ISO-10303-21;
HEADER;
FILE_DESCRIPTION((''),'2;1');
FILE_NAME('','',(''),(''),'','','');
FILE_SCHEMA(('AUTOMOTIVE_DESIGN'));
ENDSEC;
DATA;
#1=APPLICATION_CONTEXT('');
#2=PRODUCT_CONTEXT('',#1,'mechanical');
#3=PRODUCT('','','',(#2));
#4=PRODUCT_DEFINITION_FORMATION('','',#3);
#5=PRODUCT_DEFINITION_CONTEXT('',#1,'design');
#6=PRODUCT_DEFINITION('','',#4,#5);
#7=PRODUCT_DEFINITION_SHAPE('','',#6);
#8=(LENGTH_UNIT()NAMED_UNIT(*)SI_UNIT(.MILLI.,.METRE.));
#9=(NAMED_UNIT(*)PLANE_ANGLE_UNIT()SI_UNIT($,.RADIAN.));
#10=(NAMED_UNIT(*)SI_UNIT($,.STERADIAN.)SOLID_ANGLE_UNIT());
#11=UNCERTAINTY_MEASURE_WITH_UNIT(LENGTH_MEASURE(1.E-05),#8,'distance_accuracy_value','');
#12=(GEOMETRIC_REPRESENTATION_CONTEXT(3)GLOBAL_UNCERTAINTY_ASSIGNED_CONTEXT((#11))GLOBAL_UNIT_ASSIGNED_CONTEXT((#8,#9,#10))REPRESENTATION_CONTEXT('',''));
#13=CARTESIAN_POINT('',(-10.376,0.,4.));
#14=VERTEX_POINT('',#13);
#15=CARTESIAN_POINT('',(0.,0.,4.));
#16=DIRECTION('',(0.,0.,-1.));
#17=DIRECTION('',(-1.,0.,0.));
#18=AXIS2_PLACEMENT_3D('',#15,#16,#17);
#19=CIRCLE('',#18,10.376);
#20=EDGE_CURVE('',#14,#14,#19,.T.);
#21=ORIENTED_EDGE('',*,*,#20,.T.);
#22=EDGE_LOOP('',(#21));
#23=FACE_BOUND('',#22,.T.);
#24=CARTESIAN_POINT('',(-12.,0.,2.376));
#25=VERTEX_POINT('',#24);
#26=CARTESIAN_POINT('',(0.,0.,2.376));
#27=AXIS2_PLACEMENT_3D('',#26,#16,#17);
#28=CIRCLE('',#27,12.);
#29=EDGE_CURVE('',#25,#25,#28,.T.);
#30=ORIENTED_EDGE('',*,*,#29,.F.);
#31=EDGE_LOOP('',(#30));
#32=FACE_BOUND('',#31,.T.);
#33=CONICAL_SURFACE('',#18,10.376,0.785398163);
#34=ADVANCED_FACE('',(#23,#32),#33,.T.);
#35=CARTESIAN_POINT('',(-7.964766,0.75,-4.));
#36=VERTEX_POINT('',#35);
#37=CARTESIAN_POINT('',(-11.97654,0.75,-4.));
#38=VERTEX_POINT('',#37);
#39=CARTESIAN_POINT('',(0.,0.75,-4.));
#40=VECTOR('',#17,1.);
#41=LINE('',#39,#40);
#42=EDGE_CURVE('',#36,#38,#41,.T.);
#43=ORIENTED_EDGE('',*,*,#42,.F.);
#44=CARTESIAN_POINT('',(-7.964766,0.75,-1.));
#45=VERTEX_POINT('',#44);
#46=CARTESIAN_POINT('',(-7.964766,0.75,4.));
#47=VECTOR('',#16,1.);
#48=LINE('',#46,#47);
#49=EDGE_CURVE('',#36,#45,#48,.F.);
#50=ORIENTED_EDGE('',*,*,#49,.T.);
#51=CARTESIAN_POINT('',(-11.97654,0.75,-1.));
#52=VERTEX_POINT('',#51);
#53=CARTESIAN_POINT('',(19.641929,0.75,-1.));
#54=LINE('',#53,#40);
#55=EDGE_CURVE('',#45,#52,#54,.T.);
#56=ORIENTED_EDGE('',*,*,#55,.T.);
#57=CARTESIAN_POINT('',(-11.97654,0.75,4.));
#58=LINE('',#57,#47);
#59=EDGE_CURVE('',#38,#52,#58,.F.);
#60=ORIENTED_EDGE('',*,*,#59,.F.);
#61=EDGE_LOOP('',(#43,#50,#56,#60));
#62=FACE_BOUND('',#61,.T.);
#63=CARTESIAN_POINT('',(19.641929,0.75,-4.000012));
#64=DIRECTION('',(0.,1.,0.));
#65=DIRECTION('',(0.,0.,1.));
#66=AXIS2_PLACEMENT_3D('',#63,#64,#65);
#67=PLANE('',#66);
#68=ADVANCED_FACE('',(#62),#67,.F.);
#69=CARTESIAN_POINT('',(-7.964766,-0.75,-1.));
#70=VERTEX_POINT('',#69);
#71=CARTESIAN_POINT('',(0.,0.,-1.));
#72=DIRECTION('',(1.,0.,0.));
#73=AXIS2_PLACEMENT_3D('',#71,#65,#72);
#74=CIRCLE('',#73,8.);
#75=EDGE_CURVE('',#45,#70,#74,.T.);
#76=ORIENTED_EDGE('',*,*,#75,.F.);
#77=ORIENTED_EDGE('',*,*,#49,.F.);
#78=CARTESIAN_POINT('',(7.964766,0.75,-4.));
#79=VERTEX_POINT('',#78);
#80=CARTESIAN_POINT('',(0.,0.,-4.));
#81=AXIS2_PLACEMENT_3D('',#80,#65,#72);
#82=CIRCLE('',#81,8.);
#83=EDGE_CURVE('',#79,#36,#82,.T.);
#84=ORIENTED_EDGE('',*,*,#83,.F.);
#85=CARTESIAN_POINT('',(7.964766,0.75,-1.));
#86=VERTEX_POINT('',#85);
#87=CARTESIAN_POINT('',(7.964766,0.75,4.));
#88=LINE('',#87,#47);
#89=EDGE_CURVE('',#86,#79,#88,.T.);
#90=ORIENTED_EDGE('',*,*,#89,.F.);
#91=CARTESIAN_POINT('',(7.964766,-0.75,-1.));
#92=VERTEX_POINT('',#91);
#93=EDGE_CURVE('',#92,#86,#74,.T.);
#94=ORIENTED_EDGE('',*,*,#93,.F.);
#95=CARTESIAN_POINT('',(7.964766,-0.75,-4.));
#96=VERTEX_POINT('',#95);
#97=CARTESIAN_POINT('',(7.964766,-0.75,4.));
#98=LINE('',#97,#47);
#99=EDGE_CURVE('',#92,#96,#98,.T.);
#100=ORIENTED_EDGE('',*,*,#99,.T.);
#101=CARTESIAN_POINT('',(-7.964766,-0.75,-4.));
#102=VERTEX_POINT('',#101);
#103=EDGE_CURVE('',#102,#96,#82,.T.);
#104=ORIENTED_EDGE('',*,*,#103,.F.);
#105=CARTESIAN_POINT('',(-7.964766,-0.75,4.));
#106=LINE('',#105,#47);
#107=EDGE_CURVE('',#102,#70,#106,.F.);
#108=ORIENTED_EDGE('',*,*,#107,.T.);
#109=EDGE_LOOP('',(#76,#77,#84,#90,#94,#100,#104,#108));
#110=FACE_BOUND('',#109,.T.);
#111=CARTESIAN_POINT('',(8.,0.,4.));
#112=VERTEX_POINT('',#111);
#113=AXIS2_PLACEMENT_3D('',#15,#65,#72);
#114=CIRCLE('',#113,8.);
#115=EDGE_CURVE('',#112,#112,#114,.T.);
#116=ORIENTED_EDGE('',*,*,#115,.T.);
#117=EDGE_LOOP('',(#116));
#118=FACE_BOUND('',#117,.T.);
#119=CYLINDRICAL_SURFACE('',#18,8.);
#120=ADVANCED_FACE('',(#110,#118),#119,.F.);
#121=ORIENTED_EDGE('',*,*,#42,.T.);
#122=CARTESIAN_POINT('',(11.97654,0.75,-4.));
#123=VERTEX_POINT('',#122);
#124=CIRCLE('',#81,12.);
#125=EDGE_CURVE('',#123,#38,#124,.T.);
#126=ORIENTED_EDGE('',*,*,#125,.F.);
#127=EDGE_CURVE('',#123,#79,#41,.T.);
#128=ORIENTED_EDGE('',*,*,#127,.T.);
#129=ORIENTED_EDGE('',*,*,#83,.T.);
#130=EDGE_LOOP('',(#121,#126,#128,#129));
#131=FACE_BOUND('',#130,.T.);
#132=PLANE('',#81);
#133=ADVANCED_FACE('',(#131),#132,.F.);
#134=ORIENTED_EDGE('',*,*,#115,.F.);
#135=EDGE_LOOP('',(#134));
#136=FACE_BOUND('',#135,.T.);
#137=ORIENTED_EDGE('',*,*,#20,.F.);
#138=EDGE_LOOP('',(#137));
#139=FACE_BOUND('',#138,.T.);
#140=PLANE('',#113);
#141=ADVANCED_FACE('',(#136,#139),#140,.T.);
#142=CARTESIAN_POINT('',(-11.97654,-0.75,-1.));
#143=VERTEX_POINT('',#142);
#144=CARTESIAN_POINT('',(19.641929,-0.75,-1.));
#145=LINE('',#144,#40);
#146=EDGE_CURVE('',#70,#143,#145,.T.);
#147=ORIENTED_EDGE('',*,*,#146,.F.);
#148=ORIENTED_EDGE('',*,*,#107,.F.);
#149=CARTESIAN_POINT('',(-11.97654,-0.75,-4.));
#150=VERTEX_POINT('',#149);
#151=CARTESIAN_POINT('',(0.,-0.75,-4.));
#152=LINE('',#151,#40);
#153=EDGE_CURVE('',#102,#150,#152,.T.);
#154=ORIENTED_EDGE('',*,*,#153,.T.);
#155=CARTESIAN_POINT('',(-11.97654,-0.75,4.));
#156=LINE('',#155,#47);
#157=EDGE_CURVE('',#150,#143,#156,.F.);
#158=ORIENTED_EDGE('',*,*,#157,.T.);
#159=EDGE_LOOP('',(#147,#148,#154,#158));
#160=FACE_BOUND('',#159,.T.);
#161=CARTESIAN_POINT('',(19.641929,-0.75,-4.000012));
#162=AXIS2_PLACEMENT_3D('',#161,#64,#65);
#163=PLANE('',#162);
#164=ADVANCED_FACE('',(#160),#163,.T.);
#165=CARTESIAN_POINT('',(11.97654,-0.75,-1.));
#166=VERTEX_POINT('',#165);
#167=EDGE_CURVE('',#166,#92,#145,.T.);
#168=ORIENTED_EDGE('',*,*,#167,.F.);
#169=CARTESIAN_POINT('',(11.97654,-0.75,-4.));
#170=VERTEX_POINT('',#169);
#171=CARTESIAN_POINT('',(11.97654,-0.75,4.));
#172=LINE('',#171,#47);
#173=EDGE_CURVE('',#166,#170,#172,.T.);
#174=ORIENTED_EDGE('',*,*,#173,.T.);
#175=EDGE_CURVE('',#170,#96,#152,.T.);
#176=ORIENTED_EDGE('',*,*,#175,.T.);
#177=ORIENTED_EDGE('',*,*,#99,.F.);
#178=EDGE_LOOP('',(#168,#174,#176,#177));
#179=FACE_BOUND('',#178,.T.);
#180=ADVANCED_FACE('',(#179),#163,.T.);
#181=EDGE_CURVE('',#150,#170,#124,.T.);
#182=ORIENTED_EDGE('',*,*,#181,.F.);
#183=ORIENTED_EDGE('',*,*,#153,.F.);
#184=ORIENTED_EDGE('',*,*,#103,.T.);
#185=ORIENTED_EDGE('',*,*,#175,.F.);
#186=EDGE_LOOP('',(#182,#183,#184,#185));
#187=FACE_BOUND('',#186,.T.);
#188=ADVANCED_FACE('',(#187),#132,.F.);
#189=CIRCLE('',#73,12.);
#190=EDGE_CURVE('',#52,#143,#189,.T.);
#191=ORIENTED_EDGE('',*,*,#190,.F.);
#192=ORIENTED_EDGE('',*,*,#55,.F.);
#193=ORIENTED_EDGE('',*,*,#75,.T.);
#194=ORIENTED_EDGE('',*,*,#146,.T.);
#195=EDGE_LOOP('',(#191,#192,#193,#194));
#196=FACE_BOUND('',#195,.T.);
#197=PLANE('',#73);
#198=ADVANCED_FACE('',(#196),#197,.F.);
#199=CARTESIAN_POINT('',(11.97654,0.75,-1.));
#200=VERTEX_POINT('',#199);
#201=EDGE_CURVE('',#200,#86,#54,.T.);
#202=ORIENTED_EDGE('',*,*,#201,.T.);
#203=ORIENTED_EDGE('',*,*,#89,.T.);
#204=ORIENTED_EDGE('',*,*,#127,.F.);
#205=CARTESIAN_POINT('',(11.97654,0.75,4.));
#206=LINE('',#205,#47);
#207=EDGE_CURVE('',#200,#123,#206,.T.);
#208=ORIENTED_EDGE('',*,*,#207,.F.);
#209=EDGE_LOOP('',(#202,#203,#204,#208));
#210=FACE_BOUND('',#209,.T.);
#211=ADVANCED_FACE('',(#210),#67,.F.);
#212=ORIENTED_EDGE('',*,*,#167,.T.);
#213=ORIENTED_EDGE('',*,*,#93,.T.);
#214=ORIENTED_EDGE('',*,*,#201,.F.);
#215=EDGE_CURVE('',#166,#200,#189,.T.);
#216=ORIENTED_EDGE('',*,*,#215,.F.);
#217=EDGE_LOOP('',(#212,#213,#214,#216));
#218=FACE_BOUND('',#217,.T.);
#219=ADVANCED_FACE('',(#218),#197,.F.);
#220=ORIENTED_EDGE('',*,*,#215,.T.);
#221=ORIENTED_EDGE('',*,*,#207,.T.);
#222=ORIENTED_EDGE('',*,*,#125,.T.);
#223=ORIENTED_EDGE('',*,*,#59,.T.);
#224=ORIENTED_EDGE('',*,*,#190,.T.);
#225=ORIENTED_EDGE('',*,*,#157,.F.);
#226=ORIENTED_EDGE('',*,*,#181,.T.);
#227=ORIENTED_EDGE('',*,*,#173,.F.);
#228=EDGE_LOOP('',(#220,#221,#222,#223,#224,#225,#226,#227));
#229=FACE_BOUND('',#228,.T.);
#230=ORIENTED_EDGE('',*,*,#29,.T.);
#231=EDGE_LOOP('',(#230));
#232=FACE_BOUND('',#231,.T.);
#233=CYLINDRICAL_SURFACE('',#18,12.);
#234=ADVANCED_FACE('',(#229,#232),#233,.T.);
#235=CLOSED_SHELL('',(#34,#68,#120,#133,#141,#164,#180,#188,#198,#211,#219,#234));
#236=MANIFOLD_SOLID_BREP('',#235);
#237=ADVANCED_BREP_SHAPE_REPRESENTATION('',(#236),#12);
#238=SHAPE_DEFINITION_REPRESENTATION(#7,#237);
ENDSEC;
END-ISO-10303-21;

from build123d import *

# Parameters (mm, degrees)
SKETCH_1_R               = 12
SKETCH_1_R_2             = 8
EXTRUDE_1_DEPTH          = 4
CUT_EXTRUDE_1_DEPTH      = 19.761663039
CUT_EXTRUDE_1_DEPTH_BACK = 3
SKETCH_3_W               = 39.283858622
SKETCH_3_H               = 1.5


# Read off the part's stored shape, not the designer's step: M24 机械螺纹 螺柱1
with BuildPart() as part:
    # 草图1 → 凸台-拉伸1 (new, symmetric)
    with BuildSketch(Plane.XY):
        Circle(SKETCH_1_R)
        Circle(SKETCH_1_R_2, mode=Mode.SUBTRACT)
    extrude(amount=EXTRUDE_1_DEPTH, both=True)

    # M24 机械螺纹 螺柱1 outline → M24 机械螺纹 螺柱1 (revolve, cut)
    with BuildSketch(Plane.XZ):
        Polygon((12, 4), (10.376, 4), (12, 2.376), align=None)
    revolve(axis=Axis((0, 0, 0), (0, 0, 1)), mode=Mode.SUBTRACT)

    # 草图3 → 切除-拉伸-薄壁1 (cut, two sides: drawn at the far end of the back side and taken through both)
    with BuildSketch(Plane(origin=(0, 0, -4), x_dir=(-1, 0, 0), z_dir=(0, 0, -1)).offset(-CUT_EXTRUDE_1_DEPTH_BACK)):
        Rectangle(SKETCH_3_W, SKETCH_3_H)
    extrude(amount=CUT_EXTRUDE_1_DEPTH + CUT_EXTRUDE_1_DEPTH_BACK, mode=Mode.SUBTRACT)


solid = part.part
